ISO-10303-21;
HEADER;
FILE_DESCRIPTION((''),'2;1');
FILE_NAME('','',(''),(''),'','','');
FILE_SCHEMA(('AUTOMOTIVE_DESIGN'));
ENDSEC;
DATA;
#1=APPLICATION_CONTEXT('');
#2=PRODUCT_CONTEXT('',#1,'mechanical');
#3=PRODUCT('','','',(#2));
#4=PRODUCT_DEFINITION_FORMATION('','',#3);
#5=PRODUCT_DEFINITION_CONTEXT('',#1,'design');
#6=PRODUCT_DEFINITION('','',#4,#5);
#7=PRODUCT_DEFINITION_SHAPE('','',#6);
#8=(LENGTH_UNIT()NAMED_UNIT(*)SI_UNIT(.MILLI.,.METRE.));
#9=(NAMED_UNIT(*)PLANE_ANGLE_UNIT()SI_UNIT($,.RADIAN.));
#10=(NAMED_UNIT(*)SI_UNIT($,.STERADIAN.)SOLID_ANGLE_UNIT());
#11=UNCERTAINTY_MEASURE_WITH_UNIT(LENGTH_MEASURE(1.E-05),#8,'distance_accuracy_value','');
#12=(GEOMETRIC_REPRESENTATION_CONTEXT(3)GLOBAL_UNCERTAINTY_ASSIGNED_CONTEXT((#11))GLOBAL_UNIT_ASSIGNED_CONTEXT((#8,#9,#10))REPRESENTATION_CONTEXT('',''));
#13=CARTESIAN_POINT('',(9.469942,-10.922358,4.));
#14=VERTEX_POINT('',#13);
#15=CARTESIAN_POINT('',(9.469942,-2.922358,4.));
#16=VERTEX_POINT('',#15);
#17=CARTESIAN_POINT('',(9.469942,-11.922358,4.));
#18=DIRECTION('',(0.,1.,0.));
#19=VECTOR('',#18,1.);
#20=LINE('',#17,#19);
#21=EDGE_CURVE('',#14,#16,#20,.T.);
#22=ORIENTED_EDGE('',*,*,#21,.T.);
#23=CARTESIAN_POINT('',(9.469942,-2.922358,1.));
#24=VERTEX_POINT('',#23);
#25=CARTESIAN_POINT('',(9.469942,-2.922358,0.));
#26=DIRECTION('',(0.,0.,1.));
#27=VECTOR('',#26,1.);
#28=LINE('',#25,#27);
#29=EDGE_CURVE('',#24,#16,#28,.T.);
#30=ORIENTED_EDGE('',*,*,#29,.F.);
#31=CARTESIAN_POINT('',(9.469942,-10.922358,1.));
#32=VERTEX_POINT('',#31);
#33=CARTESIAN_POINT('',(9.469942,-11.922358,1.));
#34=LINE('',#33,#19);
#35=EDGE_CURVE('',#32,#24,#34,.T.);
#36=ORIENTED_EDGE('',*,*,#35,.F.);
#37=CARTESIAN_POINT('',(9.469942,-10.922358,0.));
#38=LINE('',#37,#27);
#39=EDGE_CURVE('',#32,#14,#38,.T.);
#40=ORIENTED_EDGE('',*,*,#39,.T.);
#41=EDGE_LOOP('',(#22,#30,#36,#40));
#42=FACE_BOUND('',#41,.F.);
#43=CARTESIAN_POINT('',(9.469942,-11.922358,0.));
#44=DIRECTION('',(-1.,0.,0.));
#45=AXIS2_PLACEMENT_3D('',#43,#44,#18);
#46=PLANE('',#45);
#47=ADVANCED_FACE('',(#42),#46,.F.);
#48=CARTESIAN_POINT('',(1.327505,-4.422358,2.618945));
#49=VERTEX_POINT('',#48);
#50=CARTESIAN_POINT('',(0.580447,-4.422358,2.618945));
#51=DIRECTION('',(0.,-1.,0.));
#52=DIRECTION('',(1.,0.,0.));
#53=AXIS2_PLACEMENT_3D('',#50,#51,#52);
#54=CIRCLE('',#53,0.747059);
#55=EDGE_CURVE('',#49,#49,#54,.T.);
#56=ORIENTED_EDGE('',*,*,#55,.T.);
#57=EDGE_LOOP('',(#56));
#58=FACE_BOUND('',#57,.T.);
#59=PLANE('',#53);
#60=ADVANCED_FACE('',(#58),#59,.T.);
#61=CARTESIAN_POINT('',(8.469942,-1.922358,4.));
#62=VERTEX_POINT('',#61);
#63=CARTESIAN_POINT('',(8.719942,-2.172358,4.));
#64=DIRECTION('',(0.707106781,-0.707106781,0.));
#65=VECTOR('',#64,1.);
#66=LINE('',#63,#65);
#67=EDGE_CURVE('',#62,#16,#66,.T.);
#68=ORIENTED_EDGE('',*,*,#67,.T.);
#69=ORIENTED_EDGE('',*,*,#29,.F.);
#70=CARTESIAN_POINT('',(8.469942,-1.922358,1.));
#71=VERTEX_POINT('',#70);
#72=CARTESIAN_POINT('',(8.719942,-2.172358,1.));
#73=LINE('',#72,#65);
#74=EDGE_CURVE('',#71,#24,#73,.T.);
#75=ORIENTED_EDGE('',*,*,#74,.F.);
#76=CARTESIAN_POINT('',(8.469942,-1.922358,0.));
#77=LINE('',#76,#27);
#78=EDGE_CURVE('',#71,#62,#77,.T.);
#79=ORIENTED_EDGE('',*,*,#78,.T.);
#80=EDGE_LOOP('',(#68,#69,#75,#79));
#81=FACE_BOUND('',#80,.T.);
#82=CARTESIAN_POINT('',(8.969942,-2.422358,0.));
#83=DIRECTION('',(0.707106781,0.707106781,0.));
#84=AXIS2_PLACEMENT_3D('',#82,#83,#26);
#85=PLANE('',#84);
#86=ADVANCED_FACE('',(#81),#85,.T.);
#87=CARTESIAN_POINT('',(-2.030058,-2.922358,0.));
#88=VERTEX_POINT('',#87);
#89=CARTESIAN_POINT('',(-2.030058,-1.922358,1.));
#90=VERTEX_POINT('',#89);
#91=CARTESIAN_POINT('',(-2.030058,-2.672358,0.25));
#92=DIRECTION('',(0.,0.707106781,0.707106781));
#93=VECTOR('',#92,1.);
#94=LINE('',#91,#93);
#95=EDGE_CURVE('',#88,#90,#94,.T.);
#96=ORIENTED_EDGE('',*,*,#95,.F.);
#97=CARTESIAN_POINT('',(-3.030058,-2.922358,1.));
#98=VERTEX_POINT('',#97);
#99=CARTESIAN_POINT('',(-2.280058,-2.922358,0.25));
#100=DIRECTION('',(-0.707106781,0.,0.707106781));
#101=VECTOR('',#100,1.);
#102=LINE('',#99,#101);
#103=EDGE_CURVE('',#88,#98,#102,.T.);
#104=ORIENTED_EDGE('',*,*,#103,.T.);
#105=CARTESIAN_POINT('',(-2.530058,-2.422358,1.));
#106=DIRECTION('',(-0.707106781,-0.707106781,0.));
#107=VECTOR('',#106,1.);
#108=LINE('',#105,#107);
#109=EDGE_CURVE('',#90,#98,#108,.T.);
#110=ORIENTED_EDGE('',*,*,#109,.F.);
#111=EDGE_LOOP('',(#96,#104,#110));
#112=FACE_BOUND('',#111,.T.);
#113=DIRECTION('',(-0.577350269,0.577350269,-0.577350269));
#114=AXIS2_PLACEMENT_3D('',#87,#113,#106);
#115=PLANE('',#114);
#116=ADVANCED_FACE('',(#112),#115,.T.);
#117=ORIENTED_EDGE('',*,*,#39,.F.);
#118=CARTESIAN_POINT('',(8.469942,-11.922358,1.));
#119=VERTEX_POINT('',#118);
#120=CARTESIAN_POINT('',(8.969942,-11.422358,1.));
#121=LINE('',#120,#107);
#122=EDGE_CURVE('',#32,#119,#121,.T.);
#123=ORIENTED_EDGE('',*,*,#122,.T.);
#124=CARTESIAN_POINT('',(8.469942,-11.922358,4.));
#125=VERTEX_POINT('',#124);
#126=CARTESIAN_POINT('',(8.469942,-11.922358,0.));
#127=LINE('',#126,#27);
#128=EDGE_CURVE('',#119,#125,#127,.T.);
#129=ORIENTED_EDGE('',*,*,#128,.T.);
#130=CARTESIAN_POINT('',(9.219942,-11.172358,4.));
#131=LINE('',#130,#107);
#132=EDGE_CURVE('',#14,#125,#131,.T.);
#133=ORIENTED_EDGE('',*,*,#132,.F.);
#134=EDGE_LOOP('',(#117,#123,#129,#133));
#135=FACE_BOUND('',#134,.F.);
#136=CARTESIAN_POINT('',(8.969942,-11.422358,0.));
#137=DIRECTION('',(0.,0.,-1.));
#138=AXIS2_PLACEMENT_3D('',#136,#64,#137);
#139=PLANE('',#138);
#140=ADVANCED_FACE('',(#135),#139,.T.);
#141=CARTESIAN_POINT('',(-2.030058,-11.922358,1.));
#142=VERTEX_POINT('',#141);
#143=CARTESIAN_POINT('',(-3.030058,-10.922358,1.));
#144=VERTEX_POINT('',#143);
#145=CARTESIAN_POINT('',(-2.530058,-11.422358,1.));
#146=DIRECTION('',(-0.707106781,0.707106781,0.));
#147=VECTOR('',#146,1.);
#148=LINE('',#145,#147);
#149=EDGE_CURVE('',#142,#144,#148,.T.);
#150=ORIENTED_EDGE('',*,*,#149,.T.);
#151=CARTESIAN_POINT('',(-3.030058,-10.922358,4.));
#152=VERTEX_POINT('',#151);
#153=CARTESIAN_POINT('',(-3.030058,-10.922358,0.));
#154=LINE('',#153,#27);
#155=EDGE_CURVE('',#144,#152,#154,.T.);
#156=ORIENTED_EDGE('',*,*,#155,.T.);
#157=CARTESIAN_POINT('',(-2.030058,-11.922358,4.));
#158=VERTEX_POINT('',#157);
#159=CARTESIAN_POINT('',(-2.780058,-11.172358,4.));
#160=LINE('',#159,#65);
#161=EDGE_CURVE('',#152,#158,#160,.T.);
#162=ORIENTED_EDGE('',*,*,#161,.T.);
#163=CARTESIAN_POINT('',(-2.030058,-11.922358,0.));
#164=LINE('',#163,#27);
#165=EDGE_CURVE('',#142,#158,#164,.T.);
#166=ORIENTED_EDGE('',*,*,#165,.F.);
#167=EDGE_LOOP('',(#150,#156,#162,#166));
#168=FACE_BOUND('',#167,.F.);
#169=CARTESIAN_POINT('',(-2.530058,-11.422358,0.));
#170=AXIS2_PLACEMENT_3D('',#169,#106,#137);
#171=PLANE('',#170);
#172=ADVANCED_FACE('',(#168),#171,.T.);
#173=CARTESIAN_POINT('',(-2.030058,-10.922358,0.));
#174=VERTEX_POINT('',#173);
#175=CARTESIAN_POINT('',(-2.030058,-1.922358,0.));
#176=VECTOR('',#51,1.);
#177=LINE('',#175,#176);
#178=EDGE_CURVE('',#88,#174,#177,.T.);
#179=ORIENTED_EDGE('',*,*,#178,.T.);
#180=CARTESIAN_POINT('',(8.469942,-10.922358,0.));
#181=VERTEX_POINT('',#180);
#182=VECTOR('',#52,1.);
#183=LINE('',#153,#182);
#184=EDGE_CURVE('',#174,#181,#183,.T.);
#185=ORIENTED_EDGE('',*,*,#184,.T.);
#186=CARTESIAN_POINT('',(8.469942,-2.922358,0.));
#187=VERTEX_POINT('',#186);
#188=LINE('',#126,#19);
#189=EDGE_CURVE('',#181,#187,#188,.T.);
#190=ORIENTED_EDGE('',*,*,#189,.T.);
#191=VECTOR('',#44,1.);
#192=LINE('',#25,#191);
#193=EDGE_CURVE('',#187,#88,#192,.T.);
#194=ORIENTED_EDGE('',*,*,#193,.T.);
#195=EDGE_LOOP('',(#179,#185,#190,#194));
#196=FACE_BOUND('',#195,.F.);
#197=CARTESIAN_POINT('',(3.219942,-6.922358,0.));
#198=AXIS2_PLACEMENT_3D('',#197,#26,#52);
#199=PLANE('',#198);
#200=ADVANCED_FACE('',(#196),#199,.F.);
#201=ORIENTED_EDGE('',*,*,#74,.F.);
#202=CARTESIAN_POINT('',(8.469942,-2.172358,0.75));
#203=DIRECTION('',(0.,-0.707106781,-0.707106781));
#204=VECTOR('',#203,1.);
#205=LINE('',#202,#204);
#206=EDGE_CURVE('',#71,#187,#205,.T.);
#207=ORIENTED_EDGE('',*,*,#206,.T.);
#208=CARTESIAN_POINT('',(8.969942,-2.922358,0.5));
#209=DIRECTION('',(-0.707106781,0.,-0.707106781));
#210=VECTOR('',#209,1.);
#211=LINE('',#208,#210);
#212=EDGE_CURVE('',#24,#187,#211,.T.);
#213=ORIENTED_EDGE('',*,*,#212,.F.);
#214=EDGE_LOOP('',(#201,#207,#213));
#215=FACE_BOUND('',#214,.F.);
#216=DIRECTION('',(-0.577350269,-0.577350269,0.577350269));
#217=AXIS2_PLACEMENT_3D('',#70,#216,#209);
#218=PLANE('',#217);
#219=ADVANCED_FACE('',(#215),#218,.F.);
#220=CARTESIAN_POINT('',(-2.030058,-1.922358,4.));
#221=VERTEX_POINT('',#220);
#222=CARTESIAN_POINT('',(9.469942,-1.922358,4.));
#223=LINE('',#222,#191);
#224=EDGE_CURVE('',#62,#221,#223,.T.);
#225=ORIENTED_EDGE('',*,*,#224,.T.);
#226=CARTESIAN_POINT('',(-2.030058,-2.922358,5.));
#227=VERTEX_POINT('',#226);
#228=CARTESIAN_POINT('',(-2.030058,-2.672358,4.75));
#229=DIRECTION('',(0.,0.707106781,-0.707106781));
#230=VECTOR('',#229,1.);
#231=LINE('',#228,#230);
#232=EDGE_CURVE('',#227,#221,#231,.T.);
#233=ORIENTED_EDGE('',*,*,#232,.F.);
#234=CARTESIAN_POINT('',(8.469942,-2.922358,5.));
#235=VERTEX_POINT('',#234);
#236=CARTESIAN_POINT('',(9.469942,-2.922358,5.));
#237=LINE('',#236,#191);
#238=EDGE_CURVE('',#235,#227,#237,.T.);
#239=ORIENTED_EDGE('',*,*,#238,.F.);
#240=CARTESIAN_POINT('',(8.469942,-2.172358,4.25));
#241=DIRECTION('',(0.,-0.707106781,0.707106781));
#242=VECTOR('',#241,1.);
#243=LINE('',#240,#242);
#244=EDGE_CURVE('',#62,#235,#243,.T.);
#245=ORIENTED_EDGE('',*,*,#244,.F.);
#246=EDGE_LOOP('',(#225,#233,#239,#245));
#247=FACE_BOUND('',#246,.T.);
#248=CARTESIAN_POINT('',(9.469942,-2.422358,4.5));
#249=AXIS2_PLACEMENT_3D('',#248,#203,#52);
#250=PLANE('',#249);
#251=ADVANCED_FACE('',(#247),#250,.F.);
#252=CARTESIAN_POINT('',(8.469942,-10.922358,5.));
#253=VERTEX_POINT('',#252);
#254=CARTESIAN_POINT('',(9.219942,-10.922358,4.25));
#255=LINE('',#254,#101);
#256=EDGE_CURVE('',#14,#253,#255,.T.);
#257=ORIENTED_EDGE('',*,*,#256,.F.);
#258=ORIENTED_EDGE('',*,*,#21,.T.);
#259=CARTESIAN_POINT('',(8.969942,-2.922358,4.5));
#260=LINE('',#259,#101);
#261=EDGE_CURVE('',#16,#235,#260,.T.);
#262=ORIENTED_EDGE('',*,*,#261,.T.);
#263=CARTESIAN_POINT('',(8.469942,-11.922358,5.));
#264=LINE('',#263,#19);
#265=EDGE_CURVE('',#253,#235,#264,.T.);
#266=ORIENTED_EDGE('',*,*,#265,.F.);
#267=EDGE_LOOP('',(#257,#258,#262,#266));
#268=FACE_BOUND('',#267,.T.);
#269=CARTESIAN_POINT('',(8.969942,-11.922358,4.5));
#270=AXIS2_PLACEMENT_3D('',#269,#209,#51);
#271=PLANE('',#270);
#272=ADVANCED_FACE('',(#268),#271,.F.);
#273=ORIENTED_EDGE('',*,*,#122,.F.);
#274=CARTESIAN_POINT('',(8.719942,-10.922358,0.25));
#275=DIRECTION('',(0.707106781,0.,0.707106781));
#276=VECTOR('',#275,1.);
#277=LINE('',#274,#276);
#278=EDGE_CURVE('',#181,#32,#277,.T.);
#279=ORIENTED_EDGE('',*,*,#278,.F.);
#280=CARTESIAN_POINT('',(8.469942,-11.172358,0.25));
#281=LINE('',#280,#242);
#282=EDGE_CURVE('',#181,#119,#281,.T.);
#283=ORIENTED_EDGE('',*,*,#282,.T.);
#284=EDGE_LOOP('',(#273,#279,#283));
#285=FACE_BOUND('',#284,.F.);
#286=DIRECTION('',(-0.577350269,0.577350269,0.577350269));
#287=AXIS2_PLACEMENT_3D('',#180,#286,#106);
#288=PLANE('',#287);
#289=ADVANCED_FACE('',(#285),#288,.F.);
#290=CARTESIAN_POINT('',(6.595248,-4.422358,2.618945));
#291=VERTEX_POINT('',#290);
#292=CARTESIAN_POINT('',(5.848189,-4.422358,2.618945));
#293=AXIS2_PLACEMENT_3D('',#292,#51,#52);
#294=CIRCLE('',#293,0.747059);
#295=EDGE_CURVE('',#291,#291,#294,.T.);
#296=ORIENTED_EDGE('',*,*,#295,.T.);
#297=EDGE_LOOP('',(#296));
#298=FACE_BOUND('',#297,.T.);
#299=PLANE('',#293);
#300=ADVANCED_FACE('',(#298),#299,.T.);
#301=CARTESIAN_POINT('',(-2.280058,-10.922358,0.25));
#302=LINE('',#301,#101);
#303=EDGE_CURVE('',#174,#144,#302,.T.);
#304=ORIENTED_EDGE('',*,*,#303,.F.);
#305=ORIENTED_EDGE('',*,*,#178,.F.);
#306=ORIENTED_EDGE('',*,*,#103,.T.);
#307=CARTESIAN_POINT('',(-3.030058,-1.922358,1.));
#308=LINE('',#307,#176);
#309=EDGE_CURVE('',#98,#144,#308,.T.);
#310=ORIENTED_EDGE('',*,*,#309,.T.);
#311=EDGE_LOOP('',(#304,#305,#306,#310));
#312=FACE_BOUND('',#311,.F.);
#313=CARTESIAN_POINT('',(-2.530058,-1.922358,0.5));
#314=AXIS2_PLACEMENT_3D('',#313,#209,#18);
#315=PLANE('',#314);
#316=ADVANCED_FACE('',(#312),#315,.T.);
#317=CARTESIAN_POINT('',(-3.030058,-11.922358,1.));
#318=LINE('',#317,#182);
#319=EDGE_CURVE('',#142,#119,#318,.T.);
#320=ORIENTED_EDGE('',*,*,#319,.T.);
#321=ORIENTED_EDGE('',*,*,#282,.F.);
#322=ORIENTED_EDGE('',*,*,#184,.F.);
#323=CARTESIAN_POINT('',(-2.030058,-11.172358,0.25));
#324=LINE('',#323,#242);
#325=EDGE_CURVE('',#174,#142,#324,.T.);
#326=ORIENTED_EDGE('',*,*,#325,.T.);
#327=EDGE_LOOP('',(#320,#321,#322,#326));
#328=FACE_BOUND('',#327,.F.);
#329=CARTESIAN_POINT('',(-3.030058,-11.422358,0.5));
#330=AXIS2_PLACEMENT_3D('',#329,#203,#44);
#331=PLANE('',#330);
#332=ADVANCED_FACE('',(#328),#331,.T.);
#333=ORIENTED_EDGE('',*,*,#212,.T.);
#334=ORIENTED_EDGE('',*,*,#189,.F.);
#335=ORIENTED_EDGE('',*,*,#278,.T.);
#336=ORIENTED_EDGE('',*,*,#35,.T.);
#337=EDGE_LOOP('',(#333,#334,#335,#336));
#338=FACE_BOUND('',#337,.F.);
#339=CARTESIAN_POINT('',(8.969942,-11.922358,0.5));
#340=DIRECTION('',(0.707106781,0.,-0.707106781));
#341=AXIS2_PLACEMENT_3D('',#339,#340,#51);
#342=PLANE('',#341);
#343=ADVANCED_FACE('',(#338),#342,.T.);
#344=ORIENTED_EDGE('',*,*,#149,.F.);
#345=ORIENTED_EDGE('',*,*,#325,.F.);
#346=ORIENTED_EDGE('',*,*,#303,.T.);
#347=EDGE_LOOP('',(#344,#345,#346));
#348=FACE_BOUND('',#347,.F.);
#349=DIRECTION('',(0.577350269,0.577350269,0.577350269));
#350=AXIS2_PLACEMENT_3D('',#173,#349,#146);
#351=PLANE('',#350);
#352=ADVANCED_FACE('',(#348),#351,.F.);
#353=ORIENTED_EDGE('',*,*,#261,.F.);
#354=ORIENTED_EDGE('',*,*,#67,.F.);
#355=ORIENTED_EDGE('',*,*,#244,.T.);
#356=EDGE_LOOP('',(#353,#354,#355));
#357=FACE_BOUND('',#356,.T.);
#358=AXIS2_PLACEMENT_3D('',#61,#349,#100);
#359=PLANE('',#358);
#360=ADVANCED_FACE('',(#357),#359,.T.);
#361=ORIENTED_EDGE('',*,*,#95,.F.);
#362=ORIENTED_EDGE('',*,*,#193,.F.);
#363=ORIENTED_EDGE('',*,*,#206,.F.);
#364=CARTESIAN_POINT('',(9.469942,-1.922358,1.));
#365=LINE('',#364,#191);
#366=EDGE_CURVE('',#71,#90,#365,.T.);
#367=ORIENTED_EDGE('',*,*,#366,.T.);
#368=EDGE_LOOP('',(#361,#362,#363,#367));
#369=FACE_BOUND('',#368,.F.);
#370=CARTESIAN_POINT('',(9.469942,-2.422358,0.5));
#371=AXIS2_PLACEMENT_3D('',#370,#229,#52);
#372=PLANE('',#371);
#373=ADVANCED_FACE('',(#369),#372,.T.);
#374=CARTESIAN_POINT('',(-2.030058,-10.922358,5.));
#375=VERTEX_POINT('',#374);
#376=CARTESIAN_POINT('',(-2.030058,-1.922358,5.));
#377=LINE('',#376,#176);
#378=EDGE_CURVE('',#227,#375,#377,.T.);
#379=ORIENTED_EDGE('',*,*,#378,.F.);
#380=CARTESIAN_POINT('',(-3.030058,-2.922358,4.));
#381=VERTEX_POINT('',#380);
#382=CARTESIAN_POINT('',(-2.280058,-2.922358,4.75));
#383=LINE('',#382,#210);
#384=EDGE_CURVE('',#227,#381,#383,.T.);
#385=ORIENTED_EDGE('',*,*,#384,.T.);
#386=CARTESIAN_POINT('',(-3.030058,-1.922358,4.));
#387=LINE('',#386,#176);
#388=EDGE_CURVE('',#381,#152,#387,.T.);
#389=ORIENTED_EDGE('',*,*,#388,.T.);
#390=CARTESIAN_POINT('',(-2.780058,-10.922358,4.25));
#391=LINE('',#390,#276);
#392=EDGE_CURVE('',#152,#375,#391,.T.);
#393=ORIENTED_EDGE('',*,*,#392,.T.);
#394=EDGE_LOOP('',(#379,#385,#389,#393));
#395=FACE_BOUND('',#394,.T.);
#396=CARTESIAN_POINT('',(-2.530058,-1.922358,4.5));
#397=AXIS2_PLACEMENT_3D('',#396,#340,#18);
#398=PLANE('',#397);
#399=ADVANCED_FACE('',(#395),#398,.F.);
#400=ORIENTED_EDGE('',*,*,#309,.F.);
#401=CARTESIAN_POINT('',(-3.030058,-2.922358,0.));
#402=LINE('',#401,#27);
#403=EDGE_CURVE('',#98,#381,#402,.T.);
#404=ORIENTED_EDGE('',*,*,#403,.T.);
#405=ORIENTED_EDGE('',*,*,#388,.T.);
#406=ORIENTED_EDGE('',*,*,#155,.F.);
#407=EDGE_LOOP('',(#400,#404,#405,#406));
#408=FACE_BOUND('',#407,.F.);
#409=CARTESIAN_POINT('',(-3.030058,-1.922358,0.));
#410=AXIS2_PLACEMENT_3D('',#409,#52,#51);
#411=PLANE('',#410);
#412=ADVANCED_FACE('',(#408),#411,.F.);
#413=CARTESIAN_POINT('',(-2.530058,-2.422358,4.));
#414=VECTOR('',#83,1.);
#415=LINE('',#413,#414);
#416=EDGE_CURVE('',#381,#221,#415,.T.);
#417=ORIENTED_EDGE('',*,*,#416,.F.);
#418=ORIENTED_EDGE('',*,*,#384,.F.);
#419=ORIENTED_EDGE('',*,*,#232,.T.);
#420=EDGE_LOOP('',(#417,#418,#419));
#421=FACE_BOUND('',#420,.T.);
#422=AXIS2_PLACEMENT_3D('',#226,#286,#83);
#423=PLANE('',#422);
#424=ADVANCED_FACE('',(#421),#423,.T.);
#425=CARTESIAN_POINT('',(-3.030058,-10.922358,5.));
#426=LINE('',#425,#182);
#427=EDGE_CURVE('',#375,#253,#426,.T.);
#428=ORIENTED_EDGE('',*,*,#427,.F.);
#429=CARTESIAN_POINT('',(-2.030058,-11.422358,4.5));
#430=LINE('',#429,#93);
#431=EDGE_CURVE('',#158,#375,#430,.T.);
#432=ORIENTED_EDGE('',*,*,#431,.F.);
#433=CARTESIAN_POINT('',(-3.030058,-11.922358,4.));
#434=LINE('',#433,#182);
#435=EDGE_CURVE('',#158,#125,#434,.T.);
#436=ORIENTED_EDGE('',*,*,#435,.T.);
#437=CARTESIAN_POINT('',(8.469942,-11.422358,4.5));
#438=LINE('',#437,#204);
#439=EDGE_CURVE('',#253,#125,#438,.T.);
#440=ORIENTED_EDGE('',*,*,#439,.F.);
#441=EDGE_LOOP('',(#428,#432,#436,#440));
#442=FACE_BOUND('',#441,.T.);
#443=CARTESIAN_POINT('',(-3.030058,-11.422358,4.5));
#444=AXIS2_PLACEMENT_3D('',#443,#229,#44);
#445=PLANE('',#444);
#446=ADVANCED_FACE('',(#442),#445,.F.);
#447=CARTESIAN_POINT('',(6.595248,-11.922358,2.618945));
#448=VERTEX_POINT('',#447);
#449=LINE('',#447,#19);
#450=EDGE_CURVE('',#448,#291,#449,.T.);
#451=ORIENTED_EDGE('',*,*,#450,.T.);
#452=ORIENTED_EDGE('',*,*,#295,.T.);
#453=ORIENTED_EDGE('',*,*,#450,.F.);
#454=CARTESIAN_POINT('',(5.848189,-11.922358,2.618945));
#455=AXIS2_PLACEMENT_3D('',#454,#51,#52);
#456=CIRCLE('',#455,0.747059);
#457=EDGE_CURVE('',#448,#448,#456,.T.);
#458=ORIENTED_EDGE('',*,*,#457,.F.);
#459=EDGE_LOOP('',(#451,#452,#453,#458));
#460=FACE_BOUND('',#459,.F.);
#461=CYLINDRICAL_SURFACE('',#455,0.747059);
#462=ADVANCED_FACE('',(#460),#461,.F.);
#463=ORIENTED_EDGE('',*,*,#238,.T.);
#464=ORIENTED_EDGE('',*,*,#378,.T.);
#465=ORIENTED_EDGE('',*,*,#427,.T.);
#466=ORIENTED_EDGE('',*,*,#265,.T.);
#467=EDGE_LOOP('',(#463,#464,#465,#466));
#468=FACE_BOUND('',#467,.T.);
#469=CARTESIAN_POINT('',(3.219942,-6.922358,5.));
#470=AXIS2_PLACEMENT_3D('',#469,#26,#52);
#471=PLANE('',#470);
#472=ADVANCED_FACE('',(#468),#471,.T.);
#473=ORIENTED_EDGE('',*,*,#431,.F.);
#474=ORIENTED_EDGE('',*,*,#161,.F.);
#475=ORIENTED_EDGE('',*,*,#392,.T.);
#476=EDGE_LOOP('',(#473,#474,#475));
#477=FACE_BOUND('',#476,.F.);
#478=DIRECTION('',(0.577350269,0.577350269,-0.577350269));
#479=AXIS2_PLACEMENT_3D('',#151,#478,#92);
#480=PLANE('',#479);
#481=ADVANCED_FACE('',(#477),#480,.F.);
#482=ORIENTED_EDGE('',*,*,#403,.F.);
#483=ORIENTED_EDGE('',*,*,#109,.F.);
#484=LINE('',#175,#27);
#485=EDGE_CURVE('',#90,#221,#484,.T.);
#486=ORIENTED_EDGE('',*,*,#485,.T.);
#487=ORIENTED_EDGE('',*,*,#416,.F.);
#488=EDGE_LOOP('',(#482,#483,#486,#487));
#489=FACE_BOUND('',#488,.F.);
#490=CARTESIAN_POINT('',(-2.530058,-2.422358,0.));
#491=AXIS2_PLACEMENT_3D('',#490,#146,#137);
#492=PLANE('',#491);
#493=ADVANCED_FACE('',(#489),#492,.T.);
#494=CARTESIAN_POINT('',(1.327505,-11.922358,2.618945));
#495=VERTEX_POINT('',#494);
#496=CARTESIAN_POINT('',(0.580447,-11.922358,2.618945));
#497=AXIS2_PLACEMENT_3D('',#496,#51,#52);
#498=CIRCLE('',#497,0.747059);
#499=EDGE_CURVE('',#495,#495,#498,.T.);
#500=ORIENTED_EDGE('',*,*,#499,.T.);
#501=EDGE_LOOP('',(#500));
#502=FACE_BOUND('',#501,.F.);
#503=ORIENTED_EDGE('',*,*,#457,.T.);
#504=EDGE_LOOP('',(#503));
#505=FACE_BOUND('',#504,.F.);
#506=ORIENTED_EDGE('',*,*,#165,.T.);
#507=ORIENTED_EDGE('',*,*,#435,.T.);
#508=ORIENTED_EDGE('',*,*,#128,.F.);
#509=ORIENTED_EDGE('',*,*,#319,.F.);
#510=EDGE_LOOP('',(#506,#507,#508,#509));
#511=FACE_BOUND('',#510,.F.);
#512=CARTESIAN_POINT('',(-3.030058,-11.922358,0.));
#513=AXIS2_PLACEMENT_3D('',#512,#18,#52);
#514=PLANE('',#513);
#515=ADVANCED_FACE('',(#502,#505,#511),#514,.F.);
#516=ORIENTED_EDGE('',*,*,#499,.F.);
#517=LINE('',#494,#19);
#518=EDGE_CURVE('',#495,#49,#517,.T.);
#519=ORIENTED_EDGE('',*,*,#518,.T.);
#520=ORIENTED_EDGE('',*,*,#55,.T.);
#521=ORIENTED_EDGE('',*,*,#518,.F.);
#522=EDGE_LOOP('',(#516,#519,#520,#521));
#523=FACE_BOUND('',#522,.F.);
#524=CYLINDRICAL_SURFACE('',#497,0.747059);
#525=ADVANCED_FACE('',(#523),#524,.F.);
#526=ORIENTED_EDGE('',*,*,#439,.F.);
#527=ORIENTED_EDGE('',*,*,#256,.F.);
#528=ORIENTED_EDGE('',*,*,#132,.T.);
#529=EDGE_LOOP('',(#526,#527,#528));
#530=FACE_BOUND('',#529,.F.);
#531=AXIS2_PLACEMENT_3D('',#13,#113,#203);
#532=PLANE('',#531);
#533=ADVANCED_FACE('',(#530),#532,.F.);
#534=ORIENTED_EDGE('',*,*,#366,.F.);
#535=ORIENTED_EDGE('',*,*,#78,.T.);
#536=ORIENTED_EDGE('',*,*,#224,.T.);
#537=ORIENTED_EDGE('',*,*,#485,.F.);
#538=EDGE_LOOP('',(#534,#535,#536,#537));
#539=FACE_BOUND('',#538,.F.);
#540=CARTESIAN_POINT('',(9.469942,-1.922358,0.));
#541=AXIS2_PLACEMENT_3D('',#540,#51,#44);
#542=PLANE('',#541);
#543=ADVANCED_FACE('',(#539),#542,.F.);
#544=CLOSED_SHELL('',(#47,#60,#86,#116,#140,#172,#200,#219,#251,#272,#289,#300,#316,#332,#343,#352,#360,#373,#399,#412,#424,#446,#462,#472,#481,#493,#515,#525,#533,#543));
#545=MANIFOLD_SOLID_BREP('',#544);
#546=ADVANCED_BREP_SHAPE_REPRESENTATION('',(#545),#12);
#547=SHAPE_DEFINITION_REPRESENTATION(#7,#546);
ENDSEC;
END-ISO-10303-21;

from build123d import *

# Parameters (mm, degrees)
F1_DEPTH = 5
F3_SIZE  = 1
F4_R     = 0.7470588235
F5_DEPTH = 7.5


# Not quite as in the source:
# - a feature names something its author has since deleted; it is built from what else it names


with BuildPart() as f1:
    # F0 (on Top) → F1 (new body)
    with BuildSketch(Plane.XY):
        Polygon((9.4699421152, -1.9223576039), (-3.0300578848, -1.9223576039), (-3.0300578848, -6.9223576039), (-3.0300578848, -11.9223576039), (9.4699421152, -11.9223576039), align=None)
    extrude(amount=F1_DEPTH)

    # F3
    f3_edges = [f1.edges().sort_by_distance(p)[0] for p in [
        (3.219942, -11.922358, 5),
        (9.469942, -6.922358, 5),
        (-3.030058, -1.922358, 2.5),
        (-3.030058, -11.922358, 2.5),
        (9.469942, -11.922358, 2.5),
        (9.469942, -6.922358, 0),
        (3.219942, -11.922358, 0),
        (9.469942, -1.922358, 2.5),
        (-3.030058, -6.922358, 5),
        (3.219942, -1.922358, 5),
        (3.219942, -1.922358, 0),
        (-3.030058, -6.922358, 0),
    ]]
    chamfer(f3_edges, length=F3_SIZE)

    # F4 (on face) → F5 (cut)
    with BuildSketch(Plane.XZ.offset(11.9223576039)):
        with Locations((0.5804465618, 2.6189445052)):
            Circle(F4_R)
        with Locations((5.8481891174, 2.6189445052)):
            Circle(F4_R)
    extrude(amount=-F5_DEPTH, mode=Mode.SUBTRACT)


solid = f1.part
